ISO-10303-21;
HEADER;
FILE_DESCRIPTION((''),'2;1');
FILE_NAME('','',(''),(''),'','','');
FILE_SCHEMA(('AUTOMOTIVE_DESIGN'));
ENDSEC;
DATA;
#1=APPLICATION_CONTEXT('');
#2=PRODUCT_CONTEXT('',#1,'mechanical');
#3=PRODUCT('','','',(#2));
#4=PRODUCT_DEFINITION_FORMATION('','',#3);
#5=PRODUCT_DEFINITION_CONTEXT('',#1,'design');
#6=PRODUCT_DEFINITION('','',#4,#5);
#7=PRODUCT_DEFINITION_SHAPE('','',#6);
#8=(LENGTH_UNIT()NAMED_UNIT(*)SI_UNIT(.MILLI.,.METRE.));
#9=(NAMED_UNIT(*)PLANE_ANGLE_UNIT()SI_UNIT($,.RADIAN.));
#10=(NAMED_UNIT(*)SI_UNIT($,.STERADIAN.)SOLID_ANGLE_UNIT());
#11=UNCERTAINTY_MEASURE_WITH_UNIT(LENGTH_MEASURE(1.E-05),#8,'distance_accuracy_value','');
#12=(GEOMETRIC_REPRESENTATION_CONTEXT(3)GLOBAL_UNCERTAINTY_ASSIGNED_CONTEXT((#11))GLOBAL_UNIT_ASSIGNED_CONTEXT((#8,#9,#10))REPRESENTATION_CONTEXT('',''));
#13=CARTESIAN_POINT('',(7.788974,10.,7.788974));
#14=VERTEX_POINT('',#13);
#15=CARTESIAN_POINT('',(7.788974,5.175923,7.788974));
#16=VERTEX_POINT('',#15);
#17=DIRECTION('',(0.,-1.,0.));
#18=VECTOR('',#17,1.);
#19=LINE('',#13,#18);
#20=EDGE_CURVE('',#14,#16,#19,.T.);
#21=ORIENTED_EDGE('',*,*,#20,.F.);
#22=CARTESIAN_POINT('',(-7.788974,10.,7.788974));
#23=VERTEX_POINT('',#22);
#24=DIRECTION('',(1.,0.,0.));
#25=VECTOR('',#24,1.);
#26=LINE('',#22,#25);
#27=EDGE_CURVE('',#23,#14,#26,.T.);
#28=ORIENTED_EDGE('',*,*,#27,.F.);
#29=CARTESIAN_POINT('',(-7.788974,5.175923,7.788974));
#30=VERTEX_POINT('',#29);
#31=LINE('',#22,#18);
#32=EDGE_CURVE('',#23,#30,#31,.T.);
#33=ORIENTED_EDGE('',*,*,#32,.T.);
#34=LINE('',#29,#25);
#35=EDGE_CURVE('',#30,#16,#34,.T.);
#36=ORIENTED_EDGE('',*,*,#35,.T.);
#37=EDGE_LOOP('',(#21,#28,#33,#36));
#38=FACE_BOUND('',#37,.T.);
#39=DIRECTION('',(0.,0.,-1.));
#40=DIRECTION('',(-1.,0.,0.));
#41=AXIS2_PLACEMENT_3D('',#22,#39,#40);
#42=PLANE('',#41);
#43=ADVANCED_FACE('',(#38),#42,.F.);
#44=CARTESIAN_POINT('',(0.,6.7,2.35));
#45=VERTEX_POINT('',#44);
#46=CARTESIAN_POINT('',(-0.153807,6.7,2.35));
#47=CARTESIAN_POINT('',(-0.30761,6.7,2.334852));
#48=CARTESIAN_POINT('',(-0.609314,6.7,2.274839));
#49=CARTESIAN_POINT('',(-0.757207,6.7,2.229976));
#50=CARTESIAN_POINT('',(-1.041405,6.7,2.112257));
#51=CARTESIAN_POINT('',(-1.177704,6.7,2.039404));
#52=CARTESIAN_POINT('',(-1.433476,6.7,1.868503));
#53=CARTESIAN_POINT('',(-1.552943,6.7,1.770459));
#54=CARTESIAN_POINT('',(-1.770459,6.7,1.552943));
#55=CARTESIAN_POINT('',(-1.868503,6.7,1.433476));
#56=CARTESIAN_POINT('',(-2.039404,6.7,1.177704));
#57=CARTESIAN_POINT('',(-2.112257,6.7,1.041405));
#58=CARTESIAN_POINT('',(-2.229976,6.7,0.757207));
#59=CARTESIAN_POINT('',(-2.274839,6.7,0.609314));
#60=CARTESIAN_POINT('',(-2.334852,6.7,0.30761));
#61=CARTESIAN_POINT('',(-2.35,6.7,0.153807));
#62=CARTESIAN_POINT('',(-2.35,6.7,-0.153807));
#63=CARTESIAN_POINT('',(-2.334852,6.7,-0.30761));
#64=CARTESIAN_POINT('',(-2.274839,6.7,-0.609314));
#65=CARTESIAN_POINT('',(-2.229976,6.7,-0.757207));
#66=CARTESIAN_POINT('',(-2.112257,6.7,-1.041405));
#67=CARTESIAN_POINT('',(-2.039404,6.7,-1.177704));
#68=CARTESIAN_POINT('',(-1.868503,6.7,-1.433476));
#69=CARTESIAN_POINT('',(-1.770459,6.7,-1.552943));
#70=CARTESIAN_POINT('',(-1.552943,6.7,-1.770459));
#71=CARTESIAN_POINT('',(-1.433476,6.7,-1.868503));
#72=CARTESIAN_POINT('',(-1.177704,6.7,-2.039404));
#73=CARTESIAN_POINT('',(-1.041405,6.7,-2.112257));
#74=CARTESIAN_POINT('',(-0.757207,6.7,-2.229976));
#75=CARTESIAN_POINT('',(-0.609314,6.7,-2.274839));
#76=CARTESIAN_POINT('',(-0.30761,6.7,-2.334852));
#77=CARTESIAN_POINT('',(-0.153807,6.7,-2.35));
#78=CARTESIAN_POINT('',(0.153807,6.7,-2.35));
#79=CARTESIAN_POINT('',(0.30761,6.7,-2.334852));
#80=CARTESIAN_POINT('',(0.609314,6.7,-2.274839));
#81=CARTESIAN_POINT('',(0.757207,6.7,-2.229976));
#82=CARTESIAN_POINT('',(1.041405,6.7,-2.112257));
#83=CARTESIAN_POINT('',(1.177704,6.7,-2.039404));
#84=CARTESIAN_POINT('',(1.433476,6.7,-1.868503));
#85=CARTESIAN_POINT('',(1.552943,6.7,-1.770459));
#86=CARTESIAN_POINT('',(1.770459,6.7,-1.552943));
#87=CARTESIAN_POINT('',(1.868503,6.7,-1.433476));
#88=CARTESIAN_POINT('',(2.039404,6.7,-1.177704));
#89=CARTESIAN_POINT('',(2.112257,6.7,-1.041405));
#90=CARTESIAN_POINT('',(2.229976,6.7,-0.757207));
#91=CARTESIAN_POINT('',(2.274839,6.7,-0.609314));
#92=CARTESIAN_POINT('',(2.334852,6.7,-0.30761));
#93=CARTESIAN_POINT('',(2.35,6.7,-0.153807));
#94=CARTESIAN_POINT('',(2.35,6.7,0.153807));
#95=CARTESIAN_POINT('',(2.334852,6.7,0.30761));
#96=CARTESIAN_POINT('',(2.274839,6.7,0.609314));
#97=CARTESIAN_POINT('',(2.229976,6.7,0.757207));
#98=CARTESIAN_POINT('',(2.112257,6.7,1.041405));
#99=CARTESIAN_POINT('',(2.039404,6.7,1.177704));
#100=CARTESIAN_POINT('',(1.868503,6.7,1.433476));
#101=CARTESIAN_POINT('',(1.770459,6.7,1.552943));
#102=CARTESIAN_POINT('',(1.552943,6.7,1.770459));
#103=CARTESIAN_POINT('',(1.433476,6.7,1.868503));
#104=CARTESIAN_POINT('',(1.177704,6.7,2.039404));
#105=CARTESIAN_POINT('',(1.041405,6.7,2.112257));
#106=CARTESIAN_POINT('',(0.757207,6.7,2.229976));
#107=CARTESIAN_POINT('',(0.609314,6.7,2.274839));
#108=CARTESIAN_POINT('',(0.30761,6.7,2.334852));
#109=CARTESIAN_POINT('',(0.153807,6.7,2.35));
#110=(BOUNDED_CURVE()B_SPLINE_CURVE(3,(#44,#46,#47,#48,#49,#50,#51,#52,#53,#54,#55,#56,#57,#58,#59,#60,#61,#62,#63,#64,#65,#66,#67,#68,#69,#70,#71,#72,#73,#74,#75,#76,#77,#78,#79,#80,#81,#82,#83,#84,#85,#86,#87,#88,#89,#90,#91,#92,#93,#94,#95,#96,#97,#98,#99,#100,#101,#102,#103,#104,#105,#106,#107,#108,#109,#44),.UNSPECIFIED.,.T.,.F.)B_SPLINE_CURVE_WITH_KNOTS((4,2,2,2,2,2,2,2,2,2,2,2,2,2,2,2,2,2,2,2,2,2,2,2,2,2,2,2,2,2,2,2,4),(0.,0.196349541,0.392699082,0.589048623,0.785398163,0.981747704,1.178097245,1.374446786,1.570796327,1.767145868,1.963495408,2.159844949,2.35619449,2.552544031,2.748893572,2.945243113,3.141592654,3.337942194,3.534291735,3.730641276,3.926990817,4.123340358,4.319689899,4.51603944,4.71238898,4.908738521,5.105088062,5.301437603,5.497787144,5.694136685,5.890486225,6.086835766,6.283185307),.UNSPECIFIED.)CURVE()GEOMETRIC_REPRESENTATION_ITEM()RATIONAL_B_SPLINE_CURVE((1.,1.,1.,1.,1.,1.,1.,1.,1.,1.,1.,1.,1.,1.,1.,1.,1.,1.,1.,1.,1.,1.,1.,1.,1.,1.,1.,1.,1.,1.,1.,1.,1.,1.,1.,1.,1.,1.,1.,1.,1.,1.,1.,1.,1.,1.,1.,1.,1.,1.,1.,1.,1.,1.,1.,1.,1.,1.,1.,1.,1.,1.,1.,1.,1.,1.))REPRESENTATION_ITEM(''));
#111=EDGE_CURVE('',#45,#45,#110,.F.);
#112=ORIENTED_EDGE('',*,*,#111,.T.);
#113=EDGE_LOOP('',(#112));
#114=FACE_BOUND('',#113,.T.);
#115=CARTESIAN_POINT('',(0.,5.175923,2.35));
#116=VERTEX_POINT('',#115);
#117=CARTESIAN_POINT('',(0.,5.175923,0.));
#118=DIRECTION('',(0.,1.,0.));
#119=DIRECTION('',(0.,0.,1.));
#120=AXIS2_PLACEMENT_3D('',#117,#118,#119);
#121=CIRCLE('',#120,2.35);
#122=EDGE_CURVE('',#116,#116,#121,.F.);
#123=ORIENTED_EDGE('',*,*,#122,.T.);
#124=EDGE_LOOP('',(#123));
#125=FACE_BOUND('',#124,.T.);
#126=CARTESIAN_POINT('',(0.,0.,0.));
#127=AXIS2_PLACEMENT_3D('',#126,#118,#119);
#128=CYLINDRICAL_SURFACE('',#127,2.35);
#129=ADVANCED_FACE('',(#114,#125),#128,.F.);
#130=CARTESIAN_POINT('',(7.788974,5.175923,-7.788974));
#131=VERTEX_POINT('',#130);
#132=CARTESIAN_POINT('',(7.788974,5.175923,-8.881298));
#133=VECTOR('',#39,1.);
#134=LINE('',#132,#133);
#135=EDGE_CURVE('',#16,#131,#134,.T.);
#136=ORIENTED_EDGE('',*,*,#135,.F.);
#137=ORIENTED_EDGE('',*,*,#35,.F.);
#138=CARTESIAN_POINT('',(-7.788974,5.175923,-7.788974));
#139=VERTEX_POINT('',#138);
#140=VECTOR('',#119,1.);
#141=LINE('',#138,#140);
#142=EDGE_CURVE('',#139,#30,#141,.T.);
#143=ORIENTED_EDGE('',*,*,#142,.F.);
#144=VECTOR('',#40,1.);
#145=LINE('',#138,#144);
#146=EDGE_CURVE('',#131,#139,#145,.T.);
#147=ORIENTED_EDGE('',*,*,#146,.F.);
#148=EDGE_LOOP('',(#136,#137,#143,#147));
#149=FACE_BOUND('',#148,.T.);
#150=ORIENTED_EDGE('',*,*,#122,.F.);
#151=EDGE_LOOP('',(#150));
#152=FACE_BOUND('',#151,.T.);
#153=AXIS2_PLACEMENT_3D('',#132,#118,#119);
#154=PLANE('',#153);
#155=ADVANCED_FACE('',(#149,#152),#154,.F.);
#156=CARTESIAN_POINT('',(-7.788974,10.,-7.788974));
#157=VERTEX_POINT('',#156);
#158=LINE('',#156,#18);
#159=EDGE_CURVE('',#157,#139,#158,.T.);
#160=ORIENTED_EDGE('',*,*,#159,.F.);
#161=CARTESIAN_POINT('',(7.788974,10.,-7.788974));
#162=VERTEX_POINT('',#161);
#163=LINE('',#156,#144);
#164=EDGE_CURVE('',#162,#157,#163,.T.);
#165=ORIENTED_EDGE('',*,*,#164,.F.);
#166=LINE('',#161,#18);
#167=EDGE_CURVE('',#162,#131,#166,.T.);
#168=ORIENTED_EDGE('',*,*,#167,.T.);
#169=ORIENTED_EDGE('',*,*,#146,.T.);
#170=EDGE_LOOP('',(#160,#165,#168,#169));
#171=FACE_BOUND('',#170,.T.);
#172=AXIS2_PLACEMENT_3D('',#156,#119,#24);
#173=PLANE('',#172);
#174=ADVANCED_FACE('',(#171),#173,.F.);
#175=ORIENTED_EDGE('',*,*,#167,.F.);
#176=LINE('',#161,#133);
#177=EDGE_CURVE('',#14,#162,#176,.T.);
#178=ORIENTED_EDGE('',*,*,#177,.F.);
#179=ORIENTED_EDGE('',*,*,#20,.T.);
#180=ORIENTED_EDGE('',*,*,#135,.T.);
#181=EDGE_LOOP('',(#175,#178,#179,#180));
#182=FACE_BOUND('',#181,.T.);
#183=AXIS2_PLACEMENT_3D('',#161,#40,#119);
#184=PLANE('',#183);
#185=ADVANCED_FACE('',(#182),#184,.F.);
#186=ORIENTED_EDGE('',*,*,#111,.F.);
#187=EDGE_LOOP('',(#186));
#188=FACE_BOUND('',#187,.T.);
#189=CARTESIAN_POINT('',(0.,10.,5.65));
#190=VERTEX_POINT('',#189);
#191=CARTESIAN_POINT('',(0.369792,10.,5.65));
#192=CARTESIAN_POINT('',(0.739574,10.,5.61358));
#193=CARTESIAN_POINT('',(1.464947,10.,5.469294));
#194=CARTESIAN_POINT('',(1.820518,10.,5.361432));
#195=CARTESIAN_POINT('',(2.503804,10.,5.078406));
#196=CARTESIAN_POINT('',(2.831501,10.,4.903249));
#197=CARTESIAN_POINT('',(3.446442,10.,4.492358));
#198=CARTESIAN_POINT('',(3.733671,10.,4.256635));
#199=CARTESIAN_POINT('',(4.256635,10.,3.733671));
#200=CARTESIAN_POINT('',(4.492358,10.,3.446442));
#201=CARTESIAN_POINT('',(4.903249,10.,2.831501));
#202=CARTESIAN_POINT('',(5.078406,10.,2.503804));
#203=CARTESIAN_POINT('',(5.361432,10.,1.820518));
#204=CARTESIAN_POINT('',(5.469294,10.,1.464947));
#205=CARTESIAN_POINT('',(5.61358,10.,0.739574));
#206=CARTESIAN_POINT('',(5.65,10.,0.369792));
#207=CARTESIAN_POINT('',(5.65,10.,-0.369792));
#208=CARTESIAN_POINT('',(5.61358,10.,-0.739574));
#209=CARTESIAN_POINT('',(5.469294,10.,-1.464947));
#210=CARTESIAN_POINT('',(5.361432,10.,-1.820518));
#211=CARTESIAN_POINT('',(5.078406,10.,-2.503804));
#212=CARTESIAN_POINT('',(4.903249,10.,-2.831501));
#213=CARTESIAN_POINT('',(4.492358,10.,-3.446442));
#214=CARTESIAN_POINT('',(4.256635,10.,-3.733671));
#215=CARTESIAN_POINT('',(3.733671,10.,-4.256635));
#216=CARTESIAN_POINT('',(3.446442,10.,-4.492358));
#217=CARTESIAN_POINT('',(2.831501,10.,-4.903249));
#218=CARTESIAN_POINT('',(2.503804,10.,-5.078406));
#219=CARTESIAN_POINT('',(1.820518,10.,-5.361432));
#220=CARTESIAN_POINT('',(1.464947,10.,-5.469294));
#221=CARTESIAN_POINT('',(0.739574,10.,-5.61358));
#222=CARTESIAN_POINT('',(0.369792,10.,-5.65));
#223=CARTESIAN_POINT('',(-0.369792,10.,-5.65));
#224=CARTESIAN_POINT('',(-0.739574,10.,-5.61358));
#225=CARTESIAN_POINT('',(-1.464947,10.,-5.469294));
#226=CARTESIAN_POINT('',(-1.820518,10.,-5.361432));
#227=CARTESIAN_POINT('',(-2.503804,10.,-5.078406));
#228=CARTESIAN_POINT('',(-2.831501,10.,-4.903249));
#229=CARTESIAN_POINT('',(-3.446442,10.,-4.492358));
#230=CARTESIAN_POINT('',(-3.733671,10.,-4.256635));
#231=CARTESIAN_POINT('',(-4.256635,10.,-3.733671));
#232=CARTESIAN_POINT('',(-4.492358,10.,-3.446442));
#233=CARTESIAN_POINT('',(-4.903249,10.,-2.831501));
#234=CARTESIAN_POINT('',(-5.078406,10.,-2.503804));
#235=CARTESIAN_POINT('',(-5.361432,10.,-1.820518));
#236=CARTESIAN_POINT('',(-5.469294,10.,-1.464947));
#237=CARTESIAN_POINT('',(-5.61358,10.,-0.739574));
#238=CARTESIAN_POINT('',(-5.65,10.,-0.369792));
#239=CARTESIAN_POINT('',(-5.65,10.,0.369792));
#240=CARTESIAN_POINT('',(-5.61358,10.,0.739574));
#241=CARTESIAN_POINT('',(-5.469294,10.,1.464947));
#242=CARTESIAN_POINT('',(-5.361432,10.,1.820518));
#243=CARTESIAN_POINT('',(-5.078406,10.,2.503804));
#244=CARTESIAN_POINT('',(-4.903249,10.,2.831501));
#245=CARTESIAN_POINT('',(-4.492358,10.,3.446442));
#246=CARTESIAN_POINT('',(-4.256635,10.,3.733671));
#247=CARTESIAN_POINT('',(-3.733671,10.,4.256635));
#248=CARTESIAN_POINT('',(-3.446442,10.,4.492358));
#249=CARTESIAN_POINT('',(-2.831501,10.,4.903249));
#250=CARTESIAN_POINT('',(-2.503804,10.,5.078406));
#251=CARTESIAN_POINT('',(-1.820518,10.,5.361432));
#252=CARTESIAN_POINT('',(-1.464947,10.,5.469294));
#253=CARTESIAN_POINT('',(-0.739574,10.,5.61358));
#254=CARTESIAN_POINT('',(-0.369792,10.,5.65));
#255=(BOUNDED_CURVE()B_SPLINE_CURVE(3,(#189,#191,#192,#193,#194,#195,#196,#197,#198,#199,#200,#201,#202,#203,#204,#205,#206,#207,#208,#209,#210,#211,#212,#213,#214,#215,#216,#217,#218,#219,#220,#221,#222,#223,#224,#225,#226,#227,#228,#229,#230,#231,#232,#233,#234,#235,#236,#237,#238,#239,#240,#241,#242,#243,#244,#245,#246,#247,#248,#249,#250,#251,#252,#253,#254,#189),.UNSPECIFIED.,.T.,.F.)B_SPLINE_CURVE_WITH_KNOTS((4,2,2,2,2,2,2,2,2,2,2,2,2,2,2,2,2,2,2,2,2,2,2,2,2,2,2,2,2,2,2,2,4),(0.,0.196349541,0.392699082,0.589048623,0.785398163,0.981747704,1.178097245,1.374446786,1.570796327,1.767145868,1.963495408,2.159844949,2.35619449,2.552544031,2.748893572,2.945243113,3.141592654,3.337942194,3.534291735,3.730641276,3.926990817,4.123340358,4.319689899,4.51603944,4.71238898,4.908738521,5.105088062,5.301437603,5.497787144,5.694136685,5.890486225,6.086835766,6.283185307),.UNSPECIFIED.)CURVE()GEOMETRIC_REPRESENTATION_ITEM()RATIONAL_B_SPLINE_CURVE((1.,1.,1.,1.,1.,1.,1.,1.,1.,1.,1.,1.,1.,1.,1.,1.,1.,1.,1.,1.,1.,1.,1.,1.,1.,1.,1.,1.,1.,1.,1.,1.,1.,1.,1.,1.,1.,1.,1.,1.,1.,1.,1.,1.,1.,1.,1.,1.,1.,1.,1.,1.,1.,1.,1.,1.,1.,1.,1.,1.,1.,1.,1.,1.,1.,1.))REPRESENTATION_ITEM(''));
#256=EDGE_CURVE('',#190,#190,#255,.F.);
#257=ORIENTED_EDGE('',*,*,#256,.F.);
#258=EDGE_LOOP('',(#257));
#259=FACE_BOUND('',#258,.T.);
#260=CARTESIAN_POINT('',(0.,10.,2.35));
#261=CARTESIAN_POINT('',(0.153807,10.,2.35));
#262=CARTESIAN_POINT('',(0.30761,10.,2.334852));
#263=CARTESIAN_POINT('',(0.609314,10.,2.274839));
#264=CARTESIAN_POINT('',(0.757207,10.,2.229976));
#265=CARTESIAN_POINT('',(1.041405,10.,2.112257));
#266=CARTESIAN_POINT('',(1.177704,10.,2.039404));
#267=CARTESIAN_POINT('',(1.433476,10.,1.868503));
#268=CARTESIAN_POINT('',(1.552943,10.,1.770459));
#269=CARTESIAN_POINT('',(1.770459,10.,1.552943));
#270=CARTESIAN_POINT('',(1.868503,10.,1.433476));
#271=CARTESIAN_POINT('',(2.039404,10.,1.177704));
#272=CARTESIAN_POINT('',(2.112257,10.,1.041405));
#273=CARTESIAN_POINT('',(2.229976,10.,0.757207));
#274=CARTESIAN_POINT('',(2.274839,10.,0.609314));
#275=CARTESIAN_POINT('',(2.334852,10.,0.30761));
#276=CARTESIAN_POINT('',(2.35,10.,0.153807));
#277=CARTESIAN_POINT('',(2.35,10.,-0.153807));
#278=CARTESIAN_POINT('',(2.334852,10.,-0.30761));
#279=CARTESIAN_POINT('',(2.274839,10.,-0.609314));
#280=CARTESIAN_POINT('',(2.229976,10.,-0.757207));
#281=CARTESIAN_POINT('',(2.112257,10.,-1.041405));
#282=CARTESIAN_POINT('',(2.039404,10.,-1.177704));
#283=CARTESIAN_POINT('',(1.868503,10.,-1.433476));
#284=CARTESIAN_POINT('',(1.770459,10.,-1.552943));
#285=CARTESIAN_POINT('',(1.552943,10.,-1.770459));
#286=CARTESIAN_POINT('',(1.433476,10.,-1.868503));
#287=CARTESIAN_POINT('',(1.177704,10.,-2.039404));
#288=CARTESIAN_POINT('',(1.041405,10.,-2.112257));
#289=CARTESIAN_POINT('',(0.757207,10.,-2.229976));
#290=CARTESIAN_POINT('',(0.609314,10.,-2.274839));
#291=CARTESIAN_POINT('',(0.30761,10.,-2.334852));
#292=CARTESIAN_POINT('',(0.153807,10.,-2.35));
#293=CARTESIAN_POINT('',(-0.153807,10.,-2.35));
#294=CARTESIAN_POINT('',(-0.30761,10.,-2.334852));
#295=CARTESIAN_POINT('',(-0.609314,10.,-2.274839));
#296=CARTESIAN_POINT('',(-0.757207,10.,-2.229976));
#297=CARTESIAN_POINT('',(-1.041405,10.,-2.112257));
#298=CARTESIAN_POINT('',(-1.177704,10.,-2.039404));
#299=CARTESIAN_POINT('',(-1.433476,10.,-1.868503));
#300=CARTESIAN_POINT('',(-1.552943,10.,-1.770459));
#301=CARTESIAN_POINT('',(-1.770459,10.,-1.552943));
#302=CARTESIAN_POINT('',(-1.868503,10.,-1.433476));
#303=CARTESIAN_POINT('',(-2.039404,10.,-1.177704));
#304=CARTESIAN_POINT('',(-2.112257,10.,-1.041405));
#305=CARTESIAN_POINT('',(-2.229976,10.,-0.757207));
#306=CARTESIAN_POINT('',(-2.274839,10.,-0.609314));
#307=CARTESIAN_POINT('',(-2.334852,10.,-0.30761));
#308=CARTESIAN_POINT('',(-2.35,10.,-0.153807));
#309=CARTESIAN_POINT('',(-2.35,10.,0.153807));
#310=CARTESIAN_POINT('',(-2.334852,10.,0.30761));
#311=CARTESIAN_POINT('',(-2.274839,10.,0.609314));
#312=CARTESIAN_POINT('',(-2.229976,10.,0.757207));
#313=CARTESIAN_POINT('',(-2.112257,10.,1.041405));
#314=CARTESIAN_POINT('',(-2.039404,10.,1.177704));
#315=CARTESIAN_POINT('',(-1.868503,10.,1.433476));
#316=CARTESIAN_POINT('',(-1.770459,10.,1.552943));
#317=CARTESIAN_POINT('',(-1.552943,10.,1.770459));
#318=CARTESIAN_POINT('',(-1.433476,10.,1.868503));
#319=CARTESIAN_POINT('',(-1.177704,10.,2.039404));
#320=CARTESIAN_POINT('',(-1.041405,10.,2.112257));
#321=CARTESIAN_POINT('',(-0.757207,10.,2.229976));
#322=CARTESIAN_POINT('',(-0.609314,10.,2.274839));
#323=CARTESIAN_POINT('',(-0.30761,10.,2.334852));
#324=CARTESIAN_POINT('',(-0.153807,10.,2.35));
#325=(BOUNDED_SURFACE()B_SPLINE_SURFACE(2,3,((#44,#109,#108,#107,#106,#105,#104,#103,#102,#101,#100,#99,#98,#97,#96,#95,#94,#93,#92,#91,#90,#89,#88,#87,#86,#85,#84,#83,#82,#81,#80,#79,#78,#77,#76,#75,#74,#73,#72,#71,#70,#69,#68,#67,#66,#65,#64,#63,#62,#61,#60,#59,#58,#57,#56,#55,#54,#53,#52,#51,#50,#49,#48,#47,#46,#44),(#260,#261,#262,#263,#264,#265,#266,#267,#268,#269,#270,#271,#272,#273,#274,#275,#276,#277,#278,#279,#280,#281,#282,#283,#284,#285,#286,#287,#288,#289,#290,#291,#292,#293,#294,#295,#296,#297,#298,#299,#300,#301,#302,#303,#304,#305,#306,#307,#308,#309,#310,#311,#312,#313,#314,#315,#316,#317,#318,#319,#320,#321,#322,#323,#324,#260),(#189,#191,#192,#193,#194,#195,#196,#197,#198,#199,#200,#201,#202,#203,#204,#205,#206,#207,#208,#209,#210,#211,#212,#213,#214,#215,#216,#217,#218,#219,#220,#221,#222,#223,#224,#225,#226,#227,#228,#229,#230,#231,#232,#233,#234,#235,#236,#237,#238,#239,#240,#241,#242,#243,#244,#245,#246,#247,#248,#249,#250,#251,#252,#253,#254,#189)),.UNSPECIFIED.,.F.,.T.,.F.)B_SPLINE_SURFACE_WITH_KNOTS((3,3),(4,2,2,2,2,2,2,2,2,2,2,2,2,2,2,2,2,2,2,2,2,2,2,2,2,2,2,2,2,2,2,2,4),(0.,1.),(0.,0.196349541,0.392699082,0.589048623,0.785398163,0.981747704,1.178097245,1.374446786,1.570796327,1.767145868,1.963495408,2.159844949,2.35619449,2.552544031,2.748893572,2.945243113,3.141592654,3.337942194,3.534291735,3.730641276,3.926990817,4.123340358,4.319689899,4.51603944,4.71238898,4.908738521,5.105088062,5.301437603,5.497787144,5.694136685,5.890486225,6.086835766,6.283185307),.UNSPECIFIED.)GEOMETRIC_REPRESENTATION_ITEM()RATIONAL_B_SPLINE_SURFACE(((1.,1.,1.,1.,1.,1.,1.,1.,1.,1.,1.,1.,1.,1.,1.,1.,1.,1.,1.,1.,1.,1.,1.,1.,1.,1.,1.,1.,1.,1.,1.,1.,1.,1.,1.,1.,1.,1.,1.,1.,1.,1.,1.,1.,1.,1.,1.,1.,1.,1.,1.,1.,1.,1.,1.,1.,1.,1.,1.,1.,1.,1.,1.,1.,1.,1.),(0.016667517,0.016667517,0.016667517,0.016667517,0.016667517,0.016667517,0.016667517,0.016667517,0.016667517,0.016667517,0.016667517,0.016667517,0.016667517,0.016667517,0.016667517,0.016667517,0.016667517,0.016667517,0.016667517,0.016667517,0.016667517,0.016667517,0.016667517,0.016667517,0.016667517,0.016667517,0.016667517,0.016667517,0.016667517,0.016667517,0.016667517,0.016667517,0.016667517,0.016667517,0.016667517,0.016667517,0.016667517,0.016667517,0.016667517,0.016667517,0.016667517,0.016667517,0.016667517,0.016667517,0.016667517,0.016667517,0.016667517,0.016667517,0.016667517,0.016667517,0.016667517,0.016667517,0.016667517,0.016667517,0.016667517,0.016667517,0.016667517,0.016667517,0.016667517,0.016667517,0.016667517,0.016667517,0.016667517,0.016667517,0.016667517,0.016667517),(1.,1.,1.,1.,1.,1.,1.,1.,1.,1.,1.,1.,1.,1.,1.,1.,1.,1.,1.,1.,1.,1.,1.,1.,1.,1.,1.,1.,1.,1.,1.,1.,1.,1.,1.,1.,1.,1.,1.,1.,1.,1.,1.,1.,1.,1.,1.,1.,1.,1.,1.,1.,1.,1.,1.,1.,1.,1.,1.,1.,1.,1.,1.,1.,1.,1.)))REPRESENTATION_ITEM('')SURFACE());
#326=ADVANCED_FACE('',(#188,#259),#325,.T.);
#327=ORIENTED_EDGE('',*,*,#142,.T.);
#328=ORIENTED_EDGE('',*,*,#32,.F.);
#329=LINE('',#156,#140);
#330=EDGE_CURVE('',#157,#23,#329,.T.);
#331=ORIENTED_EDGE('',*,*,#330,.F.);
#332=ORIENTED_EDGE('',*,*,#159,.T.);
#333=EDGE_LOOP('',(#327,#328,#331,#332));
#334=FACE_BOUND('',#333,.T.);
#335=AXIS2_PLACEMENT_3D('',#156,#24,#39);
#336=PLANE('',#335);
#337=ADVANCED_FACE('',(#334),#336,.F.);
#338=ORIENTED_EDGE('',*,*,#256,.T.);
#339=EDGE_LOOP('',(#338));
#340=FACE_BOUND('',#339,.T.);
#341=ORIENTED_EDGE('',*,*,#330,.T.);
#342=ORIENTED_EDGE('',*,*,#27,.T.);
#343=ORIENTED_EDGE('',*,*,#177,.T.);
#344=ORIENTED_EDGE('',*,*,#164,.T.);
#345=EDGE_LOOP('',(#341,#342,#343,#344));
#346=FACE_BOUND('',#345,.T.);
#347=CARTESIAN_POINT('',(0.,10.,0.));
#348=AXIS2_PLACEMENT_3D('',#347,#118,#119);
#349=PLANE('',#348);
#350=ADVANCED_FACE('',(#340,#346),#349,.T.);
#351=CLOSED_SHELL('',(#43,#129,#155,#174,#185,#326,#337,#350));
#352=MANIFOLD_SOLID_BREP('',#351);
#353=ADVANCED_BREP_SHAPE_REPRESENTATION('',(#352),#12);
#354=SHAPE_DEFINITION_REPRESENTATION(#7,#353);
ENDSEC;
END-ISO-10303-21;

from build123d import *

# Parameters (mm, degrees)
SKETCH1_W               = 15.577947364
SKETCH1_H               = 15.577947364
BOSS_EXTRUDE2_DEPTH     = 10
CUT_EXTRUDE1_DEPTH      = 15.877372821
CUT_EXTRUDE1_DEPTH_BACK = 15.877372821
SKETCH2_R               = 2.35
FILLET3_SIZE            = 3.3
CUT_EXTRUDE2_DEPTH      = 21.083340288
CUT_EXTRUDE2_DEPTH_BACK = 21.083340288
SKETCH9_W               = 17.356055064
SKETCH9_H               = 10.947578027


with BuildPart() as part:
    # Sketch1 → Boss-Extrude2 (new body)
    with BuildSketch(Plane(origin=(0, 0, 0), x_dir=(1, 0, 0), z_dir=(0, 1, 0))):
        Rectangle(SKETCH1_W, SKETCH1_H)
    extrude(amount=BOSS_EXTRUDE2_DEPTH)

    # Sketch2 → Cut-Extrude1 (cut, two sides: drawn at the far end of the back side and taken through both)
    with BuildSketch(Plane(origin=(0, 10, 0), x_dir=(1, 0, 0), z_dir=(0, 1, 0)).offset(-CUT_EXTRUDE1_DEPTH_BACK)):
        with Locations(Location((0, 0, 0), (0, 0, 270))):
            Circle(SKETCH2_R)
    extrude(amount=CUT_EXTRUDE1_DEPTH + CUT_EXTRUDE1_DEPTH_BACK, mode=Mode.SUBTRACT)

    # Fillet3
    # a fillet whose section is not a circle: 3.3 mm, written as the material it takes off along each edge
    with BuildSketch(Plane(origin=(0, 10, 0), x_dir=(0, 0, 1), z_dir=(-1, 0, 0))) as fillet3_piece_1:
        with BuildLine():
            Bezier((2.35 + FILLET3_SIZE, 0), (2.35, 0), (2.35, -FILLET3_SIZE), weights=[1, 0.016667517, 1])
            Line((2.35, -FILLET3_SIZE), (2.35, 0))
            Line((2.35, 0), (2.35 + FILLET3_SIZE, 0))
        make_face()
    revolve(axis=Axis((0, 10, 0), (0, 1, 0)), mode=Mode.SUBTRACT)

    # Sketch9 → Cut-Extrude2 (cut, two sides: drawn at the far end of the back side and taken through both)
    with BuildSketch(Plane.ZY.offset(7.788973682).offset(-CUT_EXTRUDE2_DEPTH_BACK)):
        with Locations((-0.203270831, -0.297866067)):
            Rectangle(SKETCH9_W, SKETCH9_H)
    extrude(amount=CUT_EXTRUDE2_DEPTH + CUT_EXTRUDE2_DEPTH_BACK, mode=Mode.SUBTRACT)


solid = part.part
